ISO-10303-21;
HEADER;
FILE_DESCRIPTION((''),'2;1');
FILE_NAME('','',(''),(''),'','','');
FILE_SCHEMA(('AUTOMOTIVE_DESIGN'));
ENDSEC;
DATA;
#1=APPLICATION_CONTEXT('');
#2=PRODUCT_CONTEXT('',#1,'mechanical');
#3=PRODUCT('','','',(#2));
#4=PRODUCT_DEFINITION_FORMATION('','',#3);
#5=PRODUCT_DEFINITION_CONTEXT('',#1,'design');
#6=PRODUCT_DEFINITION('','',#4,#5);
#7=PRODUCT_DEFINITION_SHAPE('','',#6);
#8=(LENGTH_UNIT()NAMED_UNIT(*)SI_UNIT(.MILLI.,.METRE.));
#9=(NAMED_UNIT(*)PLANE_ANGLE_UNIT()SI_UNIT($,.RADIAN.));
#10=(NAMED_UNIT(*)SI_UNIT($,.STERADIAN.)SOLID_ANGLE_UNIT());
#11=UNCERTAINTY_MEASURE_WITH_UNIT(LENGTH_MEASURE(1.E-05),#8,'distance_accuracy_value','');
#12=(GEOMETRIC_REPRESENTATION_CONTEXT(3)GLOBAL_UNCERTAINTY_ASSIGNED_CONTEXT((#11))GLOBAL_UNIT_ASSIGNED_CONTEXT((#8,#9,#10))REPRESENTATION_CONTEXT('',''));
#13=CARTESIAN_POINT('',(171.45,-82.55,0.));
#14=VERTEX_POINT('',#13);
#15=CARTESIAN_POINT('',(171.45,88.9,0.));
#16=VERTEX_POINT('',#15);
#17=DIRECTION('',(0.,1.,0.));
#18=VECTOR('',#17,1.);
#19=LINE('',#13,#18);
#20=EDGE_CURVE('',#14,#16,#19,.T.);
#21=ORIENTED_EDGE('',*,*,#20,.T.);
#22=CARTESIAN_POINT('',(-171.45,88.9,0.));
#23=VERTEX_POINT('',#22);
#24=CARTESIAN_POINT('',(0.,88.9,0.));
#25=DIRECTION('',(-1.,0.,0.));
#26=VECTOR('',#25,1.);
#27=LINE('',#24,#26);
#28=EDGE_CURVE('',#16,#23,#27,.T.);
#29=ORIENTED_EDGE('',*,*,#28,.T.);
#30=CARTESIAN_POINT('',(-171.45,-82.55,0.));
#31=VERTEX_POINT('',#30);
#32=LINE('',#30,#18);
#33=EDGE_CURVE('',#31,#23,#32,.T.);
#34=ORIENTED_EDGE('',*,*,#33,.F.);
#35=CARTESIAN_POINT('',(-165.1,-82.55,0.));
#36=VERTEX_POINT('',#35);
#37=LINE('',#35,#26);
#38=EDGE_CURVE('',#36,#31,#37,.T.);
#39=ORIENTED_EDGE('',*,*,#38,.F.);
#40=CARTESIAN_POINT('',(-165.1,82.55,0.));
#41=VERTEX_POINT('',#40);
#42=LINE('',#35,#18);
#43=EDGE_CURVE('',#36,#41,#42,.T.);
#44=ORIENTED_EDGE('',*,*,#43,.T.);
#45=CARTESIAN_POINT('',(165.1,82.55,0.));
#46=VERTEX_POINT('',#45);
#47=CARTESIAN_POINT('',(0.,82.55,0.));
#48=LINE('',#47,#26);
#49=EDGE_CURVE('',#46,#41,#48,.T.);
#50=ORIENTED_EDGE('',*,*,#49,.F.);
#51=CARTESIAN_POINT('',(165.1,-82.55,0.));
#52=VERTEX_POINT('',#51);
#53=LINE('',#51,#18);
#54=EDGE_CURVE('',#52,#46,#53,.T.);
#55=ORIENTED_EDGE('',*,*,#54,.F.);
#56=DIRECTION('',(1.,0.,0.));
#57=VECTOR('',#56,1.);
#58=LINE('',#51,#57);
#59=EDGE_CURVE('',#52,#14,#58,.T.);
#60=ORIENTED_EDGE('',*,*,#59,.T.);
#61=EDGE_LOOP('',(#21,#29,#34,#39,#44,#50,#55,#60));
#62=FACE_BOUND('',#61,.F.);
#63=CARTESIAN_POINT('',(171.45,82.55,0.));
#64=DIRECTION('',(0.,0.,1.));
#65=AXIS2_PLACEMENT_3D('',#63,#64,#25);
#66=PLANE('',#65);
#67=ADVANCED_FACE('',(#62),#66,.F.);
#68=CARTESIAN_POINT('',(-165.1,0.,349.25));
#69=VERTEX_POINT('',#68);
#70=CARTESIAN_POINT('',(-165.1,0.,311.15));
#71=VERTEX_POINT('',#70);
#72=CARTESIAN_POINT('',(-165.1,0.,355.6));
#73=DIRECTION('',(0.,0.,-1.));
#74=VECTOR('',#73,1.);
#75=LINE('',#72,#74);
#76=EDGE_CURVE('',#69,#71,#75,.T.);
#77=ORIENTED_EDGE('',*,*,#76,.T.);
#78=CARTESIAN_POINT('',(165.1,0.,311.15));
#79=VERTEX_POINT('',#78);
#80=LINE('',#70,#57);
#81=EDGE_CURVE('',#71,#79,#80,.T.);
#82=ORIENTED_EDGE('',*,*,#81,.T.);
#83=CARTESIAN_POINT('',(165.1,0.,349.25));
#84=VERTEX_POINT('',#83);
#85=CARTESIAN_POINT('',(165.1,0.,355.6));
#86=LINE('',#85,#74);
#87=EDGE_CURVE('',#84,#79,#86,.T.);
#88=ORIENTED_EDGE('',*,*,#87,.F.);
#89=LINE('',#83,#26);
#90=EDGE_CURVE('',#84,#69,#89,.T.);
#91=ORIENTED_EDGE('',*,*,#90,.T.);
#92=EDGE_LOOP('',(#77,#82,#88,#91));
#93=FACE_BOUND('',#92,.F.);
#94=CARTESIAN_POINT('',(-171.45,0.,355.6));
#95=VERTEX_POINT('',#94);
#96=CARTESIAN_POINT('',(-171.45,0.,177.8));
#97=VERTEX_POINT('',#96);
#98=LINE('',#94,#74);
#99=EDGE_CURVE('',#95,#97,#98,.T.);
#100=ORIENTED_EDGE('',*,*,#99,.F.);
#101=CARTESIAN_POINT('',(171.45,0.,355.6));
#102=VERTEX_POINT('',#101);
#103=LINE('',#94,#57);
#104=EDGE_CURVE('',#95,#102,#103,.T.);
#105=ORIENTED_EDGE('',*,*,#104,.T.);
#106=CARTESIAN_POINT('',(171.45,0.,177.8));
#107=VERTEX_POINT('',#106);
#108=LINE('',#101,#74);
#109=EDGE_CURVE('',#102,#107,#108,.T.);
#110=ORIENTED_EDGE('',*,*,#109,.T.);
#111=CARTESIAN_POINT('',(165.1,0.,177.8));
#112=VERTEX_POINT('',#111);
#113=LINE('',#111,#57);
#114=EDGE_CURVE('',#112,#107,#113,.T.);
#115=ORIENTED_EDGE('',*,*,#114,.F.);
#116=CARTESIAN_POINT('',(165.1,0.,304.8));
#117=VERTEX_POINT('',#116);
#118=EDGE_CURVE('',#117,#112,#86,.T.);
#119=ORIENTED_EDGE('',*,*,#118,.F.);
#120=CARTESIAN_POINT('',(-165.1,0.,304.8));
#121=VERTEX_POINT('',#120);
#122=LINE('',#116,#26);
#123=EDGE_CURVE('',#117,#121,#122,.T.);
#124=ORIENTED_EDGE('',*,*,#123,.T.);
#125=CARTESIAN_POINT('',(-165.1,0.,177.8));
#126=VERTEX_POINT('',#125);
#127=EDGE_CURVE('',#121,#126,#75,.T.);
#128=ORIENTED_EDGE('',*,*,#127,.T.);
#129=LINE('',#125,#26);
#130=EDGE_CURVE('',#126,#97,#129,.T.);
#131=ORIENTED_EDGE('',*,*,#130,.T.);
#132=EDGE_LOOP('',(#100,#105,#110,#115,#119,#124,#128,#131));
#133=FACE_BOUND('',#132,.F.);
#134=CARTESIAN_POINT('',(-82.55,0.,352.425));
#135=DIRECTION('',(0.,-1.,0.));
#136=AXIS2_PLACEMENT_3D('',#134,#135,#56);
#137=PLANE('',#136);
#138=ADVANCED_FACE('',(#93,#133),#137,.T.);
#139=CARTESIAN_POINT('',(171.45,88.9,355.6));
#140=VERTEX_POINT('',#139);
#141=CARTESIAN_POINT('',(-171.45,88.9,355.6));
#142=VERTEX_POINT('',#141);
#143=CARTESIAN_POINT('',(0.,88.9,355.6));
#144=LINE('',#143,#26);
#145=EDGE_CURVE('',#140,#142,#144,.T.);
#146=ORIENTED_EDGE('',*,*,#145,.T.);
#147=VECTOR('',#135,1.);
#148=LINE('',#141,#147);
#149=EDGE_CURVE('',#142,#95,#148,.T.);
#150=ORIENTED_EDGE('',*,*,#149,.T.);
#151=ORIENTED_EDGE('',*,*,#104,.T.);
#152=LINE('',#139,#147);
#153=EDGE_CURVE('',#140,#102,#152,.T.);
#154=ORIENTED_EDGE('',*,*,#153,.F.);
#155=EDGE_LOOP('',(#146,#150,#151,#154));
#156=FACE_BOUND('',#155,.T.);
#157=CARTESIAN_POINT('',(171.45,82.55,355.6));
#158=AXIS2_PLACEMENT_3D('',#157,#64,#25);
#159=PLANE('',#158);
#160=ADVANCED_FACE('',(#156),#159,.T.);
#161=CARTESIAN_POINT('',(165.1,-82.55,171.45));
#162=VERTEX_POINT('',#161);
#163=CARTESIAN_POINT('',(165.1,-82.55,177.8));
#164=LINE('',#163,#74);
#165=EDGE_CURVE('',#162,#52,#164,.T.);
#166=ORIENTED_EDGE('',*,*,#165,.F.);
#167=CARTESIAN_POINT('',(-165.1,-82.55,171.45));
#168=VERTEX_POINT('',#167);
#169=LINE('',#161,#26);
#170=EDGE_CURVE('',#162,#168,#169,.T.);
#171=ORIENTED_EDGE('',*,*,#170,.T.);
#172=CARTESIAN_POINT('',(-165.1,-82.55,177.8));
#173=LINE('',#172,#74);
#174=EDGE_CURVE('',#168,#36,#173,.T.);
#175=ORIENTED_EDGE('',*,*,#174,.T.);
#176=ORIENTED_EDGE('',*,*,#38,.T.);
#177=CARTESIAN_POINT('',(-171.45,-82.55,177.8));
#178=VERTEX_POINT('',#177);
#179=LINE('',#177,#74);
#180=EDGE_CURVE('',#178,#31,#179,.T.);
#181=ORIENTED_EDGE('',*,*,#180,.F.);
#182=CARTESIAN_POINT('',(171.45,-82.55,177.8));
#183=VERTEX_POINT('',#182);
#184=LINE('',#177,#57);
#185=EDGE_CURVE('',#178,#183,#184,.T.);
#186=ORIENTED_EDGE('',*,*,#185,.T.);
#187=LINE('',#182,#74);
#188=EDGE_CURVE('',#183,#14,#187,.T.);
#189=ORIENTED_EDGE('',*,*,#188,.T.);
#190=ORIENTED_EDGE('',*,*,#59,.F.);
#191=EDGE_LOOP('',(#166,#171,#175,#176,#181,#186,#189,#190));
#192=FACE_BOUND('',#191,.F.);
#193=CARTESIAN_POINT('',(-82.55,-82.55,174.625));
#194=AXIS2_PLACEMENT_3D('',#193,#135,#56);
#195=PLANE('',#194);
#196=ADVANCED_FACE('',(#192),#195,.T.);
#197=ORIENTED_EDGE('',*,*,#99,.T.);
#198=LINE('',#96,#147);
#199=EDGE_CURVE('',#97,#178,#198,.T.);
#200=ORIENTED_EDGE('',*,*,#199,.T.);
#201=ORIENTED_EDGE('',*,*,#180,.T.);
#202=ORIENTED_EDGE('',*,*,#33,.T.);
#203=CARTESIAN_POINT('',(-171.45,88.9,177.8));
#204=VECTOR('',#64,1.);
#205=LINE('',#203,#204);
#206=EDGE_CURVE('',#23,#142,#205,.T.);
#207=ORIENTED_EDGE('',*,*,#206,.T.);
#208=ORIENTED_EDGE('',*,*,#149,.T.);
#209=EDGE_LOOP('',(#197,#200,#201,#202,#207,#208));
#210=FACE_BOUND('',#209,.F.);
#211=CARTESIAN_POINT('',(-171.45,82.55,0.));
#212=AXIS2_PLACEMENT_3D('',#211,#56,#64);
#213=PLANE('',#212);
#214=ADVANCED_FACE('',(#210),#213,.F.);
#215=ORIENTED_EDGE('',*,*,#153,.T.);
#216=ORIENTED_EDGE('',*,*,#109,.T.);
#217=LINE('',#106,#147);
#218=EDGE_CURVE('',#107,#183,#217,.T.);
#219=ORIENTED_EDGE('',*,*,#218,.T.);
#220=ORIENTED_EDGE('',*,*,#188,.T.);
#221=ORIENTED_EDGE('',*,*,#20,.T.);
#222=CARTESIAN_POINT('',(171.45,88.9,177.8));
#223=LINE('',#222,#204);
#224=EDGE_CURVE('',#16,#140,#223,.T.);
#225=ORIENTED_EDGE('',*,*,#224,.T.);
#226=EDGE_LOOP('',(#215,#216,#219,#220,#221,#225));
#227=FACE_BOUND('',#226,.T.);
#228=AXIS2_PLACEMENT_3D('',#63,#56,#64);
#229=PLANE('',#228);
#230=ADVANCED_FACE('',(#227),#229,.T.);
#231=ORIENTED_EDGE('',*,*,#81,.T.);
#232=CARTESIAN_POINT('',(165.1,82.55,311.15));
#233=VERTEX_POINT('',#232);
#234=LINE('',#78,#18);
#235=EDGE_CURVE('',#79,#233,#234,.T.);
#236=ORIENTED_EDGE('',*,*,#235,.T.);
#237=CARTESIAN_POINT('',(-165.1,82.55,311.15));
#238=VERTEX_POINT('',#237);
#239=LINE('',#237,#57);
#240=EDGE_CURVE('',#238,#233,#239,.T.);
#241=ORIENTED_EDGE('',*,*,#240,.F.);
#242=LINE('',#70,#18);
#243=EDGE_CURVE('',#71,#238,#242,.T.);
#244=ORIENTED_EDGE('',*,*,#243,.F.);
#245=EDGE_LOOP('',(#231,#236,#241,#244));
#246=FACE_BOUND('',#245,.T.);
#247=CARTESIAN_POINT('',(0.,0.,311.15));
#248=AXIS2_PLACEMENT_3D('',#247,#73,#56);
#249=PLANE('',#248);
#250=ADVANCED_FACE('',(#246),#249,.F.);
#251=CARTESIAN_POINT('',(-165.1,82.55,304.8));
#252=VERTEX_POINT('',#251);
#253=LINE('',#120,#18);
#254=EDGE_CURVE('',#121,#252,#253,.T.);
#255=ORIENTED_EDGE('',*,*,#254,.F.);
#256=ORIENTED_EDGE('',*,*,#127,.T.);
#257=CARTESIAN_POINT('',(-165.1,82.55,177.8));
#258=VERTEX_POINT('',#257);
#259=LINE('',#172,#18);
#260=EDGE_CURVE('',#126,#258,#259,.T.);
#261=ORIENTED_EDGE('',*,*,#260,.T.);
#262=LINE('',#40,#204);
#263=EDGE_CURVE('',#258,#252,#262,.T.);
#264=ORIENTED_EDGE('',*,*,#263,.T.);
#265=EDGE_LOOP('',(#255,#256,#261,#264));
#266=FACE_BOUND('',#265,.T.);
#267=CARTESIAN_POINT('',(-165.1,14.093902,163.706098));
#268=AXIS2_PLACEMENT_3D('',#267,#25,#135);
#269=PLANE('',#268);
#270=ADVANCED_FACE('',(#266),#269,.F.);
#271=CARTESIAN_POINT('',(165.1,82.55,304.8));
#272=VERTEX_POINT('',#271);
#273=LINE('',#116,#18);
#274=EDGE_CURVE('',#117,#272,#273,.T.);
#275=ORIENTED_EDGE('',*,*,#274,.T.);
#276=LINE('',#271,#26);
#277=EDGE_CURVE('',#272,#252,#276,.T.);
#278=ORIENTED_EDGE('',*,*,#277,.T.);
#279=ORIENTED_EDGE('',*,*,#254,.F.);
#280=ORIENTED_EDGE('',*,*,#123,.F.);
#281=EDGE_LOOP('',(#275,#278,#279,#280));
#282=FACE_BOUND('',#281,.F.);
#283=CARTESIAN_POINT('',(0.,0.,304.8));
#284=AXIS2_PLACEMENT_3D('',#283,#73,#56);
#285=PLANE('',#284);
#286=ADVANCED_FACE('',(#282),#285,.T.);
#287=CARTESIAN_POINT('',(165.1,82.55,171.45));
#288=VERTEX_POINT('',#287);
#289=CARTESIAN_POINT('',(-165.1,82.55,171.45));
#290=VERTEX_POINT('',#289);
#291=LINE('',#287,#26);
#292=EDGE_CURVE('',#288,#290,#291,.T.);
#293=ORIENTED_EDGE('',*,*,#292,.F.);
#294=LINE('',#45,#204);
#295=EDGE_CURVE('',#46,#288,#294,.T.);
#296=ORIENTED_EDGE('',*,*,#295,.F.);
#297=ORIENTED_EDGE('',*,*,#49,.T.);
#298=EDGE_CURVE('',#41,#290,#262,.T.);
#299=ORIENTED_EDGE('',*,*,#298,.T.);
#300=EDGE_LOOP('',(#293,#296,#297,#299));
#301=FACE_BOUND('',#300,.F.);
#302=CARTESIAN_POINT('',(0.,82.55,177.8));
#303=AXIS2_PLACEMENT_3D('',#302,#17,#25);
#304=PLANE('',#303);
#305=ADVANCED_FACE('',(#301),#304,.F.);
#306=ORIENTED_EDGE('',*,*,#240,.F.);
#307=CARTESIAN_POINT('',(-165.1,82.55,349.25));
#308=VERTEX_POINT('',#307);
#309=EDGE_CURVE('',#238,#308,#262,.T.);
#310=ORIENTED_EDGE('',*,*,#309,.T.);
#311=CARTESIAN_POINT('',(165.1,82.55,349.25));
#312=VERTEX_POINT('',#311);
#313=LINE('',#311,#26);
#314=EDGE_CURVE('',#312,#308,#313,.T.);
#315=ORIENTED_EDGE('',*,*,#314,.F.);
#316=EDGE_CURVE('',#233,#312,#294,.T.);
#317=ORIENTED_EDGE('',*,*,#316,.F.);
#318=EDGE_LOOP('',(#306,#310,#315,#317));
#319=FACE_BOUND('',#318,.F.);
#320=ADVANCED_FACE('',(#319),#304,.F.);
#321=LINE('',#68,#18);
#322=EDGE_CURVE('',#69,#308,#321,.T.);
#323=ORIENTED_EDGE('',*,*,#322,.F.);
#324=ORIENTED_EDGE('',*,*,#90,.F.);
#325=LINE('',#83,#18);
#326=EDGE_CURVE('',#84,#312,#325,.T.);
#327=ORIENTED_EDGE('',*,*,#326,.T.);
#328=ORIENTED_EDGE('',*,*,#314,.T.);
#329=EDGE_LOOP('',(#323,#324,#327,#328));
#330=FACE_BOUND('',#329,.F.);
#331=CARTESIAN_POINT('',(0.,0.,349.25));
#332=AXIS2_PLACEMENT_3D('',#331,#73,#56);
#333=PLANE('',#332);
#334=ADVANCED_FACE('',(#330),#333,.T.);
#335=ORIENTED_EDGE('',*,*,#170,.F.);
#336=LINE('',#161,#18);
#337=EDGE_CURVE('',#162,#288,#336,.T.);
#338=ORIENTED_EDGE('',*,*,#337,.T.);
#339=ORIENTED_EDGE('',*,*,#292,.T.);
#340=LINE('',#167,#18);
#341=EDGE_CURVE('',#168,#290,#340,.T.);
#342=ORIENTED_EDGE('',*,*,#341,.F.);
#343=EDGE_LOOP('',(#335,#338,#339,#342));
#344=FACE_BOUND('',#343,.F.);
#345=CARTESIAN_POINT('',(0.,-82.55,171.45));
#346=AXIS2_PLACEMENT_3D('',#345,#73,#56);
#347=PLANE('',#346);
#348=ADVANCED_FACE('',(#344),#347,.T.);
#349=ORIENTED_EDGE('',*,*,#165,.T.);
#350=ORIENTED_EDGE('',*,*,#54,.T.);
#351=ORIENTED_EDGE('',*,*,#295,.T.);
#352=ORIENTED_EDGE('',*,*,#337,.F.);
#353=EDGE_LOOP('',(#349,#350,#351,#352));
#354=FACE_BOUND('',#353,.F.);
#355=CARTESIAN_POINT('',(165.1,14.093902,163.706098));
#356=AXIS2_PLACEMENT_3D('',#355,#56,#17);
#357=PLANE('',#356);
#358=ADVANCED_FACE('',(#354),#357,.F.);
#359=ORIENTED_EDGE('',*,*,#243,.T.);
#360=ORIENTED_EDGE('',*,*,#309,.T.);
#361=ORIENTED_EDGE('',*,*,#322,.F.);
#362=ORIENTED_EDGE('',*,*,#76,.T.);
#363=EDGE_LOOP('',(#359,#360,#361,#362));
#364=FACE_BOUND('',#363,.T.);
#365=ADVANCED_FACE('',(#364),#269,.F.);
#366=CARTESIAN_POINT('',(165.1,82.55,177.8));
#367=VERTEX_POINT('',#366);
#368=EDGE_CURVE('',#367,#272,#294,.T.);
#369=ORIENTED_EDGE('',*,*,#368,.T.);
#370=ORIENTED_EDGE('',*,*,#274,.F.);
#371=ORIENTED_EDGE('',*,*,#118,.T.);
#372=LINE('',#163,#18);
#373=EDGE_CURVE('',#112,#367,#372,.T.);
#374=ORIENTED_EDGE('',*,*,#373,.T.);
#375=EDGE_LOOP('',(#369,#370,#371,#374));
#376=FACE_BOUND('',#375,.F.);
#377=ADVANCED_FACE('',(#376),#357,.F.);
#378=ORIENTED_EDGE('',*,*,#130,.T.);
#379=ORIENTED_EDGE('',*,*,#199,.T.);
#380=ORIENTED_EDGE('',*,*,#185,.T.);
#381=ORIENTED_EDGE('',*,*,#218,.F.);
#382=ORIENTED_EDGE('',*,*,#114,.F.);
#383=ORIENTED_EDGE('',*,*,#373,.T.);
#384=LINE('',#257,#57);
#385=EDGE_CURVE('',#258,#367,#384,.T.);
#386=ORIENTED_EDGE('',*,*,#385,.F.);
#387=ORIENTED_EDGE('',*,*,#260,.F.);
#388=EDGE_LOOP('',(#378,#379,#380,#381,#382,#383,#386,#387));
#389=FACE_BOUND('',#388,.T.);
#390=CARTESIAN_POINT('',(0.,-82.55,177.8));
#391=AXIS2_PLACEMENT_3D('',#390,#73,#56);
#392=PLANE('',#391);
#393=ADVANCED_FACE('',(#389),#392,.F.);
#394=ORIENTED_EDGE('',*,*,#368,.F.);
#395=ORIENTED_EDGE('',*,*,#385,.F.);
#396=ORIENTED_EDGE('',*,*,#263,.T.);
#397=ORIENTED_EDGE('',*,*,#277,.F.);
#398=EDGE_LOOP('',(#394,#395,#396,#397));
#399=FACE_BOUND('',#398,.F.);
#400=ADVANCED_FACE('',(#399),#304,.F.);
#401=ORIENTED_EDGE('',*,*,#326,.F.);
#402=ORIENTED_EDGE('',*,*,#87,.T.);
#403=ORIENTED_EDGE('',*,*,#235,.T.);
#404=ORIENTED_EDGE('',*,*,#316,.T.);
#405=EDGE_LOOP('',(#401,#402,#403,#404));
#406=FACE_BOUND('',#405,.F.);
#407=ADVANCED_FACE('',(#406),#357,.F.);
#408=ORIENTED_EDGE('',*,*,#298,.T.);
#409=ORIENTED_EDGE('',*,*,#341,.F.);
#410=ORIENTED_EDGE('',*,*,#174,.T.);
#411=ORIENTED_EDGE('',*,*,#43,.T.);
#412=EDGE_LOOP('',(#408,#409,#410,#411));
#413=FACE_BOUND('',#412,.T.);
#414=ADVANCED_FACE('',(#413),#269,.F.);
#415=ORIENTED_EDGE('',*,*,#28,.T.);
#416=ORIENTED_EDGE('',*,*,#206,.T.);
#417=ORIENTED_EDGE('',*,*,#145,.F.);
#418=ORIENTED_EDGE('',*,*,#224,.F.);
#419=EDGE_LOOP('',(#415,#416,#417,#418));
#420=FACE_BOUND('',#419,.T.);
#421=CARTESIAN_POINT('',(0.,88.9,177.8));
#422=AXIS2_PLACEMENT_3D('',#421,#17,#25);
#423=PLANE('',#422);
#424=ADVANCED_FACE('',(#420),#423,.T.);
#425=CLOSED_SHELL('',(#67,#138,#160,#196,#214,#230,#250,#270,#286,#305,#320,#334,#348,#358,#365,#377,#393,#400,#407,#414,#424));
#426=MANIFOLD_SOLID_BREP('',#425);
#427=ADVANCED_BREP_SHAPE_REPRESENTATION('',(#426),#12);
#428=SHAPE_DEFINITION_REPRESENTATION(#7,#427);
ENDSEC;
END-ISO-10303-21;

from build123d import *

# Parameters (mm, degrees)
F2_DEPTH = 6.35
F3_W     = 165.1
F3_H     = 6.35
F4_DEPTH = 165.1
F5_W     = 165.1
F5_H     = 6.35
F6_DEPTH = 82.55
F8_W     = 342.9
F8_H     = 355.6
F9_DEPTH = 6.35


with BuildPart() as f2:
    # F1 (on offset) → F2 (new body)
    with BuildSketch(Plane.YZ.offset(165.1)):
        Polygon((-82.55, 177.8), (-82.55, 0), (82.55, 0), (82.55, 355.6), (0, 355.6), (0, 177.8), align=None)
    extrude(amount=F2_DEPTH)

    # F3 (on face) → F4 (join, through all)
    with BuildSketch(Plane.XZ.offset(82.55)):
        with Locations((82.55, 174.625)):
            Rectangle(F3_W, F3_H)
    extrude(amount=-F4_DEPTH)

    # F5 (on face) → F6 (join, through all)
    with BuildSketch(Plane.XZ):
        with Locations((82.55, 352.425)):
            Rectangle(F5_W, F5_H)
        with Locations((82.55, 307.975)):
            Rectangle(F5_W, F5_H)
    extrude(amount=-F6_DEPTH)

    # F7: F2 across plane


with BuildPart() as f2_1:
    add(f2.part)
    add(f2.part.mirror(Plane.YZ))

    # F8 (on face) → F9 (join)
    with BuildSketch(Plane(origin=(0, 82.55, 0), x_dir=(-1, 0, 0), z_dir=(0, 1, 0))):
        with Locations((0, 177.8)):
            Rectangle(F8_W, F8_H)
    extrude(amount=F9_DEPTH)


solid = f2_1.part
